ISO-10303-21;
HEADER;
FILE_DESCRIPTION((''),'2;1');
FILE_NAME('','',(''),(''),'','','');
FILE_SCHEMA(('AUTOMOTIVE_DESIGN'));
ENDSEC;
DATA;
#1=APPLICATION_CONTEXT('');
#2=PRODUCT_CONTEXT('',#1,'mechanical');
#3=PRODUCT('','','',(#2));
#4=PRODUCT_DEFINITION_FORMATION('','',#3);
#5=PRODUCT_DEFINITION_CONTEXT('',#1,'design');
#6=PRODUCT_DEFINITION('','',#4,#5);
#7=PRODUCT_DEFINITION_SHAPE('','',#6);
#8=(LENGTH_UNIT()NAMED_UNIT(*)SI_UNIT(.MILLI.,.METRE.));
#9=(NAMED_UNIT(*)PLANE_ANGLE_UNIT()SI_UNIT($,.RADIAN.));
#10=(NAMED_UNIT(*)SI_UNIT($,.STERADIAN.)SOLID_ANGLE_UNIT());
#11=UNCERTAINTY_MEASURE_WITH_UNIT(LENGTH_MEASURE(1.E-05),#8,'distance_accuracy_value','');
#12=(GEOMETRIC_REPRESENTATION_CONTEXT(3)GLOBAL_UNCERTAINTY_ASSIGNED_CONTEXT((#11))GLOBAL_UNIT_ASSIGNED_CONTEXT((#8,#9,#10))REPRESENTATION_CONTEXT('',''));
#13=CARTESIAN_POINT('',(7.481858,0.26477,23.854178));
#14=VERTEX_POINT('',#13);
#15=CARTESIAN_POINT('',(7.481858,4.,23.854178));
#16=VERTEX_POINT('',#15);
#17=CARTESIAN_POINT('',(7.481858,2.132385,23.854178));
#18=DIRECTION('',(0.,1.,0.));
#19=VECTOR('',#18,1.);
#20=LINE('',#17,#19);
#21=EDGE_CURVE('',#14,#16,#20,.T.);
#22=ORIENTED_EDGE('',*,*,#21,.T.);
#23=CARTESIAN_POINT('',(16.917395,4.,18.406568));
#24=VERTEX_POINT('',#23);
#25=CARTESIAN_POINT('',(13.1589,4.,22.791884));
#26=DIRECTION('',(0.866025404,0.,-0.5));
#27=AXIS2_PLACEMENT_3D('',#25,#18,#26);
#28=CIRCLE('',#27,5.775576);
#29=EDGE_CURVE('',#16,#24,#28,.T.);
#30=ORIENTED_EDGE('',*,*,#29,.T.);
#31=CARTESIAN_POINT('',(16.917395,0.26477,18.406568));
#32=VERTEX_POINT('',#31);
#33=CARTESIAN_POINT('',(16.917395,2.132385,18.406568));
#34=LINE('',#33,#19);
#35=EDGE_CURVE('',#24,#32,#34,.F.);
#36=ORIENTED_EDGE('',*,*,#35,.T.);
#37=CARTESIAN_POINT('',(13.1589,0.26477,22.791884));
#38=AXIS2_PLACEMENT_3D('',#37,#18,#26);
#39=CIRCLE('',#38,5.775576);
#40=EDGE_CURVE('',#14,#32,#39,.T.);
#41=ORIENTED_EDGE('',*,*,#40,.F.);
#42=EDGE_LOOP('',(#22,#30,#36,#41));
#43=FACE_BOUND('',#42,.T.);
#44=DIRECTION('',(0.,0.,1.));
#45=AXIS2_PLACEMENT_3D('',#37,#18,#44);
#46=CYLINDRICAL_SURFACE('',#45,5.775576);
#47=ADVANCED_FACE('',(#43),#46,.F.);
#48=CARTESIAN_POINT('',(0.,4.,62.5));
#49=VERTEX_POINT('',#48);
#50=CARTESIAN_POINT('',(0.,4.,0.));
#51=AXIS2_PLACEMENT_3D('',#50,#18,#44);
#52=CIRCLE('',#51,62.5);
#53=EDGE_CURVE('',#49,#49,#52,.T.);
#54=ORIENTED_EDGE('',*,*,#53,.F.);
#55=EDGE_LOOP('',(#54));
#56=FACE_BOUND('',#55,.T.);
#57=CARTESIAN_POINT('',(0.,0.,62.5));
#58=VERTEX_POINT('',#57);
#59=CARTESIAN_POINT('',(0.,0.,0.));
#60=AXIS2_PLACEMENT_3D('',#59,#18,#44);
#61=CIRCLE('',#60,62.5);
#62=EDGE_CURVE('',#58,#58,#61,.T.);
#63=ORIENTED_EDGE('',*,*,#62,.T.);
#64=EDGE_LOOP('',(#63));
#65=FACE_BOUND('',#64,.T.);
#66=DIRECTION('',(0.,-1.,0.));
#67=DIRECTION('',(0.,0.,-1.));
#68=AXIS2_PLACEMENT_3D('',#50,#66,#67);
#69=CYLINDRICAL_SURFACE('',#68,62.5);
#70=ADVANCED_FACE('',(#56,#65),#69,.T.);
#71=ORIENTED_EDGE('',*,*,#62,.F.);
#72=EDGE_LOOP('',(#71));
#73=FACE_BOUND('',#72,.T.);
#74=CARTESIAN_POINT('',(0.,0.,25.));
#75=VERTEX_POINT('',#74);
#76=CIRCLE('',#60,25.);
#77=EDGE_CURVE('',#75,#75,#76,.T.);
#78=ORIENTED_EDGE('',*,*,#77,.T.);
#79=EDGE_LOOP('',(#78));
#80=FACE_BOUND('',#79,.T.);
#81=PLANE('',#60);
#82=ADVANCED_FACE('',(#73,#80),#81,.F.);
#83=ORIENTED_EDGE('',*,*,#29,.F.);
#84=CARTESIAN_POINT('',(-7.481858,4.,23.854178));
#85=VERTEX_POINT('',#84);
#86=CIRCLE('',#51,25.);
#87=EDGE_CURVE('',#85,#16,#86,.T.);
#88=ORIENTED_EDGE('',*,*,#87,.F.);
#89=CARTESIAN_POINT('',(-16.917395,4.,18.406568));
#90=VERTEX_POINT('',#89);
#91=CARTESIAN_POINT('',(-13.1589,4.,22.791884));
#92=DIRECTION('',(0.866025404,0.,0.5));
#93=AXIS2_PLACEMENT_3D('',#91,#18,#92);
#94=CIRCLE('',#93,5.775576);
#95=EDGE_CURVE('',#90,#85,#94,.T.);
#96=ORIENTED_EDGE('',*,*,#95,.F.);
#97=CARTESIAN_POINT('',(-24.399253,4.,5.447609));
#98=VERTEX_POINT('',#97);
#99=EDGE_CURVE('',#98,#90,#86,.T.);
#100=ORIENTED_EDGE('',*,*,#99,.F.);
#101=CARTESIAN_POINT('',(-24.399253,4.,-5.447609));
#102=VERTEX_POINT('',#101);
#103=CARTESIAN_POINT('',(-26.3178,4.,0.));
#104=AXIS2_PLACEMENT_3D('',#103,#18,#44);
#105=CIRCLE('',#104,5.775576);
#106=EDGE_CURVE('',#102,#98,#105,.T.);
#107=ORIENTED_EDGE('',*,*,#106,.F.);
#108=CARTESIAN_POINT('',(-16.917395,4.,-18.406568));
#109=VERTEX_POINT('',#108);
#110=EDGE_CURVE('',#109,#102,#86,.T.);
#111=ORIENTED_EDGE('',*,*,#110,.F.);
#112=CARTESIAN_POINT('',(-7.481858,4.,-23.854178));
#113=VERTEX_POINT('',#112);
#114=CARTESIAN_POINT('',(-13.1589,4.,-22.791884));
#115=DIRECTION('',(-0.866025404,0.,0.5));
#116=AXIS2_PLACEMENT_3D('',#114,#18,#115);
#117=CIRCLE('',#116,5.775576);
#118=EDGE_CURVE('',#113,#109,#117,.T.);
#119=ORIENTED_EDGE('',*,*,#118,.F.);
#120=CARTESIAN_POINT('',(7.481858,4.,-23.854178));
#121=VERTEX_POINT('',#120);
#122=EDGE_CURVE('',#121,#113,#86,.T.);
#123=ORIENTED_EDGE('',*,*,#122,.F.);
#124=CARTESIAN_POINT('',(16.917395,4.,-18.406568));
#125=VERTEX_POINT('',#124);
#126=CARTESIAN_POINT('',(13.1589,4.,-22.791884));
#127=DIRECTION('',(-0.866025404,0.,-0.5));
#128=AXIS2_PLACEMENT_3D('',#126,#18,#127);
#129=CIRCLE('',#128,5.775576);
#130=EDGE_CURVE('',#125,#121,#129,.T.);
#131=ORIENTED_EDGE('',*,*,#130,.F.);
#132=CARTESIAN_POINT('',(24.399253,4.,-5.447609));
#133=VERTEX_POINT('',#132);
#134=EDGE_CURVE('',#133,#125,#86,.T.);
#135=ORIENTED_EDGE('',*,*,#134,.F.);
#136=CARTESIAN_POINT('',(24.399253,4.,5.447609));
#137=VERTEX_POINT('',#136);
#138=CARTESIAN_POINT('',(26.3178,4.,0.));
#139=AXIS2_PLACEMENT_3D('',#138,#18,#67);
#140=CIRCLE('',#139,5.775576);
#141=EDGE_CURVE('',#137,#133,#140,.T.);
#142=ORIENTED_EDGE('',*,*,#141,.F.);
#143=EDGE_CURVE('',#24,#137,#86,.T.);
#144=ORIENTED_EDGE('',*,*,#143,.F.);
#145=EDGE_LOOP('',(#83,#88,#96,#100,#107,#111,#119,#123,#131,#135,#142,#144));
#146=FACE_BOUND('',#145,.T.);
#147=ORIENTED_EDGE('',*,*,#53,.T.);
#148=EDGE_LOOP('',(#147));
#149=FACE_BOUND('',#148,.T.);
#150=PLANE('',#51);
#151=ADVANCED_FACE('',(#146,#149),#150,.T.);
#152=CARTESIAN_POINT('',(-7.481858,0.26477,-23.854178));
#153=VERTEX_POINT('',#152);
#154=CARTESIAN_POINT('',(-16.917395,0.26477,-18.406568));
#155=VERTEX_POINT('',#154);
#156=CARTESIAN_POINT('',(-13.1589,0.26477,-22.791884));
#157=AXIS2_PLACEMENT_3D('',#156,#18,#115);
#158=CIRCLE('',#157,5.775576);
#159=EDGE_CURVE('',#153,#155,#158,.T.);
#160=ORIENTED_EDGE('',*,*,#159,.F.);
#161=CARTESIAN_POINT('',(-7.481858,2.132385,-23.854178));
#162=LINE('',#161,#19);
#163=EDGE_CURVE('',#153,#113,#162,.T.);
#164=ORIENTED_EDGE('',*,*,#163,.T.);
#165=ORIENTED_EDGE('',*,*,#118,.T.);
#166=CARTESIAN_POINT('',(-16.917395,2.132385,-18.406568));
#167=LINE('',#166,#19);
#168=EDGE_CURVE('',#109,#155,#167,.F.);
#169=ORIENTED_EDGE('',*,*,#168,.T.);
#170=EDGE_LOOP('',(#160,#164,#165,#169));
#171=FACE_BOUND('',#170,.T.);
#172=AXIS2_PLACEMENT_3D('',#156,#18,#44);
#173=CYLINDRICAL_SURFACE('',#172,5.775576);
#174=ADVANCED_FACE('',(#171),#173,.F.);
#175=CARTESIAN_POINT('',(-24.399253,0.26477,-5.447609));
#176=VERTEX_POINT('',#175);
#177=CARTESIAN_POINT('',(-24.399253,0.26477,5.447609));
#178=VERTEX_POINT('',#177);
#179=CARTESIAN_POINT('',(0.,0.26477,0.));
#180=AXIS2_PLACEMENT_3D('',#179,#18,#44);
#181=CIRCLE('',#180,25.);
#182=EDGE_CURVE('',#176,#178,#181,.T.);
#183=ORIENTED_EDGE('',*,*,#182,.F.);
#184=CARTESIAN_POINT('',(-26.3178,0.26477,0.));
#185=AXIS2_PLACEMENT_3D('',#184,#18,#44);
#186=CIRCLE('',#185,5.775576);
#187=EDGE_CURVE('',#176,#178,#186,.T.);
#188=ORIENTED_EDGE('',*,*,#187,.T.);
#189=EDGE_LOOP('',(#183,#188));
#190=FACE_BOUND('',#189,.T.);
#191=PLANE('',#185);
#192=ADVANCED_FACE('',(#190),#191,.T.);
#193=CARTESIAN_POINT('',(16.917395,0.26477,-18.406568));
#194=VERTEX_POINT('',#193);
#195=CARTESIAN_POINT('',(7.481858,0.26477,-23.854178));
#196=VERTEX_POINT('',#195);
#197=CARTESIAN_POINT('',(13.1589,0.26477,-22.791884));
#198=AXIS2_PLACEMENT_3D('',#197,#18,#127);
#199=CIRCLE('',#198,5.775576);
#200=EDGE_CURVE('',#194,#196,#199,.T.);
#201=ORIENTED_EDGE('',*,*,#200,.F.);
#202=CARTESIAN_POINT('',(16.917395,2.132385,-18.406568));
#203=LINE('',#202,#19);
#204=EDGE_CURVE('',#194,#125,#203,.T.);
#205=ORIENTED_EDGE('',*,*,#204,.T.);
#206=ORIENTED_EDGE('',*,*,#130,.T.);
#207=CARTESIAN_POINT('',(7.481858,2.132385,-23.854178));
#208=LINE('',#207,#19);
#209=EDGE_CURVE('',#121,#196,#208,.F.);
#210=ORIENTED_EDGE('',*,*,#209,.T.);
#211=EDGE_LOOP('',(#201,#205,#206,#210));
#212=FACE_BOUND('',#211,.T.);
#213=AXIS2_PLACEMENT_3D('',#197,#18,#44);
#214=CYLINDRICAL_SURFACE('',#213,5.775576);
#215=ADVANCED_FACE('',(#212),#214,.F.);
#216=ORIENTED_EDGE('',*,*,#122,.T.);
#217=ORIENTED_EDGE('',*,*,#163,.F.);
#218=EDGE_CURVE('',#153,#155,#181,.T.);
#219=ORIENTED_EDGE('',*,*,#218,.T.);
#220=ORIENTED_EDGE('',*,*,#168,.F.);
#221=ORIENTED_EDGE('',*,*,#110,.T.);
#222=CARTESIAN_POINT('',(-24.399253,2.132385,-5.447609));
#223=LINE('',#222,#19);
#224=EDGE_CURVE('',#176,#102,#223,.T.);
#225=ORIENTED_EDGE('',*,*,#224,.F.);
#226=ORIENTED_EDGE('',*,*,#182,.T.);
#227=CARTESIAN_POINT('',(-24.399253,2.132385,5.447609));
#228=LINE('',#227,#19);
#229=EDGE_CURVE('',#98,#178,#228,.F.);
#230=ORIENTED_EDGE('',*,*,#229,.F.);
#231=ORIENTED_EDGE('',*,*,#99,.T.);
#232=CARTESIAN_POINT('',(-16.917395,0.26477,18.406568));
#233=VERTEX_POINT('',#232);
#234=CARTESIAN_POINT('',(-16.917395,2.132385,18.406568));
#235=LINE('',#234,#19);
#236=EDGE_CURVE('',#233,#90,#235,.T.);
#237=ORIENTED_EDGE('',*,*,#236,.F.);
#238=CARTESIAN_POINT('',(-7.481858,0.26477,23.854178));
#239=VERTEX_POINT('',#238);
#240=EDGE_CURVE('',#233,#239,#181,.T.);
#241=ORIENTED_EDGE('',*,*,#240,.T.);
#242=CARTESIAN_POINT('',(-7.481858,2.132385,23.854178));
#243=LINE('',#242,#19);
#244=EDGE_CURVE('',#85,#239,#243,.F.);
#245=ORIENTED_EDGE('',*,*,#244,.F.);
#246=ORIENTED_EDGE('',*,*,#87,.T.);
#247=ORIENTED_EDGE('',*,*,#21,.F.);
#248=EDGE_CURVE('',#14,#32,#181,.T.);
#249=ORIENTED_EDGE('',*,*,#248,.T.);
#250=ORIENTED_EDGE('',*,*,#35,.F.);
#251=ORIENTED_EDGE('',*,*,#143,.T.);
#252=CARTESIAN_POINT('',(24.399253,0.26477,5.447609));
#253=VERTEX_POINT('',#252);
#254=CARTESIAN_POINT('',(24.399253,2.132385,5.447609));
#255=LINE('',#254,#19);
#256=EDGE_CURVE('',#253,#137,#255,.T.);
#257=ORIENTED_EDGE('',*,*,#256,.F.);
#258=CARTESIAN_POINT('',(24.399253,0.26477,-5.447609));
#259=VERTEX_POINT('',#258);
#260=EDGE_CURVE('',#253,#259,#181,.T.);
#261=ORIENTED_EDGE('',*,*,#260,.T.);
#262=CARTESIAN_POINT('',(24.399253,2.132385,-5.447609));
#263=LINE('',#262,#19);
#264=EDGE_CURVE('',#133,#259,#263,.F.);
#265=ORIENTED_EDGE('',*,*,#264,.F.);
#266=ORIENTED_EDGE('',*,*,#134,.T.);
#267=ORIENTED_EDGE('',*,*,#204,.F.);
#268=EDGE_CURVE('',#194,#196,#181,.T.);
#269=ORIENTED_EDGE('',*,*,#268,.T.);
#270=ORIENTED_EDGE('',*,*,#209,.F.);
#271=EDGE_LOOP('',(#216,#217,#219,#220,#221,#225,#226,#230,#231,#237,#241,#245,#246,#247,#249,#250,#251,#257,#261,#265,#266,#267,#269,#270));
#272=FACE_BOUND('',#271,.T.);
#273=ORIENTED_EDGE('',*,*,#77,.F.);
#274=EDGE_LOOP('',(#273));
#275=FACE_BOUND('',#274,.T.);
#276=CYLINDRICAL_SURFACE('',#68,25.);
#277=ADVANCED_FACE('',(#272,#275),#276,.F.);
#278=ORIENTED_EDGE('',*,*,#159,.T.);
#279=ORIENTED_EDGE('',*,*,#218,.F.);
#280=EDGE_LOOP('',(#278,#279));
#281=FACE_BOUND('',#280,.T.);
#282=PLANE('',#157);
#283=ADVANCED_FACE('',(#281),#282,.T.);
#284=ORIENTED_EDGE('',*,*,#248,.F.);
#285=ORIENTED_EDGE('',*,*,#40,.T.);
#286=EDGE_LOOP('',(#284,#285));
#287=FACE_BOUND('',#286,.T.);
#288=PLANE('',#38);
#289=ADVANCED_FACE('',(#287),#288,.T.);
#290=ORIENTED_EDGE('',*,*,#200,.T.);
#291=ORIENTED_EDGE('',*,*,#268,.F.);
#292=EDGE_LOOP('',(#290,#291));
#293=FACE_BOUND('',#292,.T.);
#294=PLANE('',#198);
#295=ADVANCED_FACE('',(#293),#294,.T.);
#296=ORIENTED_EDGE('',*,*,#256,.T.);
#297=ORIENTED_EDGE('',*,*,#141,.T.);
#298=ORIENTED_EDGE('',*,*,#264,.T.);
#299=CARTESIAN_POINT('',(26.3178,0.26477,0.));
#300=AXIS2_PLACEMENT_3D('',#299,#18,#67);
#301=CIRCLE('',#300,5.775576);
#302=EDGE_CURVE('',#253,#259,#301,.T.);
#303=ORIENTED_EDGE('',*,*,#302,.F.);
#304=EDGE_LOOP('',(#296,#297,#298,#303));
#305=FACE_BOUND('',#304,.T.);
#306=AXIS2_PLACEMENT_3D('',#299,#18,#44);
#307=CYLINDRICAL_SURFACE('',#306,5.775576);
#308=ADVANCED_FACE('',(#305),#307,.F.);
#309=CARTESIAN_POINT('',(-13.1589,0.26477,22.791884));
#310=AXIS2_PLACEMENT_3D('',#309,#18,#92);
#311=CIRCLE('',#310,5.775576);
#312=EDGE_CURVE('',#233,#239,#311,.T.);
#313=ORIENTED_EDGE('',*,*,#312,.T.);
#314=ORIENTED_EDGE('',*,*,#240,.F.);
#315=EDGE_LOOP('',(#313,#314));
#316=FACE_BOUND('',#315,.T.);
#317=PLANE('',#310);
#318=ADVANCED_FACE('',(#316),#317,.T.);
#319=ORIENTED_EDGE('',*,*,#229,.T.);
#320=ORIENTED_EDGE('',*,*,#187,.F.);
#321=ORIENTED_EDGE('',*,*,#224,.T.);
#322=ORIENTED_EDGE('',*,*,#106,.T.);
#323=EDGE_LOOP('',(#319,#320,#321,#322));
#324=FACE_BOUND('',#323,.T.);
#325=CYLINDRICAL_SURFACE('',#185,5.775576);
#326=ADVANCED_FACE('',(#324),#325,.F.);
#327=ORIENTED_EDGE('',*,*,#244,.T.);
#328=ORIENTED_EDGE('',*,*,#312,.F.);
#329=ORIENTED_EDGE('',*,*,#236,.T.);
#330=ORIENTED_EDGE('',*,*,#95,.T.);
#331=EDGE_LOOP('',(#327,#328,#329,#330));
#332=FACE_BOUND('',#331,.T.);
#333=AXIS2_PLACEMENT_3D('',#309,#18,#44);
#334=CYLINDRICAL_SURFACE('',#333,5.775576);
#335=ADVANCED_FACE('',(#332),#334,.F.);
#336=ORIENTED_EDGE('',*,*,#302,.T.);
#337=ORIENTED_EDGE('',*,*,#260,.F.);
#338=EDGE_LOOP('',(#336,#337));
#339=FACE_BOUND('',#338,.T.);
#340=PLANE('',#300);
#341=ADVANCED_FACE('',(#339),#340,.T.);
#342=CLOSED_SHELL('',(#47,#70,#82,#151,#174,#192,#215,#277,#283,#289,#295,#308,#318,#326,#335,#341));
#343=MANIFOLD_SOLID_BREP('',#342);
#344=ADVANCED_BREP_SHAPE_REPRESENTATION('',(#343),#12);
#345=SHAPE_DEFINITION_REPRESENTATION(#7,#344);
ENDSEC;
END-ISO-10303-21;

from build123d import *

# Parameters (mm, degrees)
SKETCH1_R           = 62.5
BOSS_EXTRUDE1_DEPTH = 4
SKETCH2_R           = 25
CUT_EXTRUDE1_DEPTH  = 89.478811023
SKETCH3_R           = 5.775575554
CUT_EXTRUDE2_DEPTH  = 3.73522955
CIRPATTERN1_COUNT   = 6


with BuildPart() as part:
    # Sketch1 → Boss-Extrude1 (new body)
    with BuildSketch(Plane(origin=(0, 0, 0), x_dir=(1, 0, 0), z_dir=(0, 1, 0))):
        Circle(SKETCH1_R)
    extrude(amount=BOSS_EXTRUDE1_DEPTH)

    # Sketch2 → Cut-Extrude1 (cut, through all)
    with BuildSketch(Plane(origin=(0, 0, 0), x_dir=(1, 0, 0), z_dir=(0, 1, 0))):
        Circle(SKETCH2_R)
    extrude(amount=CUT_EXTRUDE1_DEPTH, mode=Mode.SUBTRACT)

    # Sketch3 → Cut-Extrude2 (cut)
    with BuildSketch(Plane(origin=(0, 4, 0), x_dir=(1, 0, 0), z_dir=(0, 1, 0))):
        with Locations((-26.317800491, 0)):
            Circle(SKETCH3_R)
    cut_extrude2 = extrude(amount=-CUT_EXTRUDE2_DEPTH, mode=Mode.SUBTRACT)

    # CirPattern1: Cut-Extrude2 ×6 about axis
    cirpattern1_axis = Axis((0, 0, 0), (0, 1, 0))
    for i in range(1, CIRPATTERN1_COUNT):
        add(cut_extrude2.rotate(cirpattern1_axis, i * 360 / CIRPATTERN1_COUNT), mode=Mode.SUBTRACT)


solid = part.part
